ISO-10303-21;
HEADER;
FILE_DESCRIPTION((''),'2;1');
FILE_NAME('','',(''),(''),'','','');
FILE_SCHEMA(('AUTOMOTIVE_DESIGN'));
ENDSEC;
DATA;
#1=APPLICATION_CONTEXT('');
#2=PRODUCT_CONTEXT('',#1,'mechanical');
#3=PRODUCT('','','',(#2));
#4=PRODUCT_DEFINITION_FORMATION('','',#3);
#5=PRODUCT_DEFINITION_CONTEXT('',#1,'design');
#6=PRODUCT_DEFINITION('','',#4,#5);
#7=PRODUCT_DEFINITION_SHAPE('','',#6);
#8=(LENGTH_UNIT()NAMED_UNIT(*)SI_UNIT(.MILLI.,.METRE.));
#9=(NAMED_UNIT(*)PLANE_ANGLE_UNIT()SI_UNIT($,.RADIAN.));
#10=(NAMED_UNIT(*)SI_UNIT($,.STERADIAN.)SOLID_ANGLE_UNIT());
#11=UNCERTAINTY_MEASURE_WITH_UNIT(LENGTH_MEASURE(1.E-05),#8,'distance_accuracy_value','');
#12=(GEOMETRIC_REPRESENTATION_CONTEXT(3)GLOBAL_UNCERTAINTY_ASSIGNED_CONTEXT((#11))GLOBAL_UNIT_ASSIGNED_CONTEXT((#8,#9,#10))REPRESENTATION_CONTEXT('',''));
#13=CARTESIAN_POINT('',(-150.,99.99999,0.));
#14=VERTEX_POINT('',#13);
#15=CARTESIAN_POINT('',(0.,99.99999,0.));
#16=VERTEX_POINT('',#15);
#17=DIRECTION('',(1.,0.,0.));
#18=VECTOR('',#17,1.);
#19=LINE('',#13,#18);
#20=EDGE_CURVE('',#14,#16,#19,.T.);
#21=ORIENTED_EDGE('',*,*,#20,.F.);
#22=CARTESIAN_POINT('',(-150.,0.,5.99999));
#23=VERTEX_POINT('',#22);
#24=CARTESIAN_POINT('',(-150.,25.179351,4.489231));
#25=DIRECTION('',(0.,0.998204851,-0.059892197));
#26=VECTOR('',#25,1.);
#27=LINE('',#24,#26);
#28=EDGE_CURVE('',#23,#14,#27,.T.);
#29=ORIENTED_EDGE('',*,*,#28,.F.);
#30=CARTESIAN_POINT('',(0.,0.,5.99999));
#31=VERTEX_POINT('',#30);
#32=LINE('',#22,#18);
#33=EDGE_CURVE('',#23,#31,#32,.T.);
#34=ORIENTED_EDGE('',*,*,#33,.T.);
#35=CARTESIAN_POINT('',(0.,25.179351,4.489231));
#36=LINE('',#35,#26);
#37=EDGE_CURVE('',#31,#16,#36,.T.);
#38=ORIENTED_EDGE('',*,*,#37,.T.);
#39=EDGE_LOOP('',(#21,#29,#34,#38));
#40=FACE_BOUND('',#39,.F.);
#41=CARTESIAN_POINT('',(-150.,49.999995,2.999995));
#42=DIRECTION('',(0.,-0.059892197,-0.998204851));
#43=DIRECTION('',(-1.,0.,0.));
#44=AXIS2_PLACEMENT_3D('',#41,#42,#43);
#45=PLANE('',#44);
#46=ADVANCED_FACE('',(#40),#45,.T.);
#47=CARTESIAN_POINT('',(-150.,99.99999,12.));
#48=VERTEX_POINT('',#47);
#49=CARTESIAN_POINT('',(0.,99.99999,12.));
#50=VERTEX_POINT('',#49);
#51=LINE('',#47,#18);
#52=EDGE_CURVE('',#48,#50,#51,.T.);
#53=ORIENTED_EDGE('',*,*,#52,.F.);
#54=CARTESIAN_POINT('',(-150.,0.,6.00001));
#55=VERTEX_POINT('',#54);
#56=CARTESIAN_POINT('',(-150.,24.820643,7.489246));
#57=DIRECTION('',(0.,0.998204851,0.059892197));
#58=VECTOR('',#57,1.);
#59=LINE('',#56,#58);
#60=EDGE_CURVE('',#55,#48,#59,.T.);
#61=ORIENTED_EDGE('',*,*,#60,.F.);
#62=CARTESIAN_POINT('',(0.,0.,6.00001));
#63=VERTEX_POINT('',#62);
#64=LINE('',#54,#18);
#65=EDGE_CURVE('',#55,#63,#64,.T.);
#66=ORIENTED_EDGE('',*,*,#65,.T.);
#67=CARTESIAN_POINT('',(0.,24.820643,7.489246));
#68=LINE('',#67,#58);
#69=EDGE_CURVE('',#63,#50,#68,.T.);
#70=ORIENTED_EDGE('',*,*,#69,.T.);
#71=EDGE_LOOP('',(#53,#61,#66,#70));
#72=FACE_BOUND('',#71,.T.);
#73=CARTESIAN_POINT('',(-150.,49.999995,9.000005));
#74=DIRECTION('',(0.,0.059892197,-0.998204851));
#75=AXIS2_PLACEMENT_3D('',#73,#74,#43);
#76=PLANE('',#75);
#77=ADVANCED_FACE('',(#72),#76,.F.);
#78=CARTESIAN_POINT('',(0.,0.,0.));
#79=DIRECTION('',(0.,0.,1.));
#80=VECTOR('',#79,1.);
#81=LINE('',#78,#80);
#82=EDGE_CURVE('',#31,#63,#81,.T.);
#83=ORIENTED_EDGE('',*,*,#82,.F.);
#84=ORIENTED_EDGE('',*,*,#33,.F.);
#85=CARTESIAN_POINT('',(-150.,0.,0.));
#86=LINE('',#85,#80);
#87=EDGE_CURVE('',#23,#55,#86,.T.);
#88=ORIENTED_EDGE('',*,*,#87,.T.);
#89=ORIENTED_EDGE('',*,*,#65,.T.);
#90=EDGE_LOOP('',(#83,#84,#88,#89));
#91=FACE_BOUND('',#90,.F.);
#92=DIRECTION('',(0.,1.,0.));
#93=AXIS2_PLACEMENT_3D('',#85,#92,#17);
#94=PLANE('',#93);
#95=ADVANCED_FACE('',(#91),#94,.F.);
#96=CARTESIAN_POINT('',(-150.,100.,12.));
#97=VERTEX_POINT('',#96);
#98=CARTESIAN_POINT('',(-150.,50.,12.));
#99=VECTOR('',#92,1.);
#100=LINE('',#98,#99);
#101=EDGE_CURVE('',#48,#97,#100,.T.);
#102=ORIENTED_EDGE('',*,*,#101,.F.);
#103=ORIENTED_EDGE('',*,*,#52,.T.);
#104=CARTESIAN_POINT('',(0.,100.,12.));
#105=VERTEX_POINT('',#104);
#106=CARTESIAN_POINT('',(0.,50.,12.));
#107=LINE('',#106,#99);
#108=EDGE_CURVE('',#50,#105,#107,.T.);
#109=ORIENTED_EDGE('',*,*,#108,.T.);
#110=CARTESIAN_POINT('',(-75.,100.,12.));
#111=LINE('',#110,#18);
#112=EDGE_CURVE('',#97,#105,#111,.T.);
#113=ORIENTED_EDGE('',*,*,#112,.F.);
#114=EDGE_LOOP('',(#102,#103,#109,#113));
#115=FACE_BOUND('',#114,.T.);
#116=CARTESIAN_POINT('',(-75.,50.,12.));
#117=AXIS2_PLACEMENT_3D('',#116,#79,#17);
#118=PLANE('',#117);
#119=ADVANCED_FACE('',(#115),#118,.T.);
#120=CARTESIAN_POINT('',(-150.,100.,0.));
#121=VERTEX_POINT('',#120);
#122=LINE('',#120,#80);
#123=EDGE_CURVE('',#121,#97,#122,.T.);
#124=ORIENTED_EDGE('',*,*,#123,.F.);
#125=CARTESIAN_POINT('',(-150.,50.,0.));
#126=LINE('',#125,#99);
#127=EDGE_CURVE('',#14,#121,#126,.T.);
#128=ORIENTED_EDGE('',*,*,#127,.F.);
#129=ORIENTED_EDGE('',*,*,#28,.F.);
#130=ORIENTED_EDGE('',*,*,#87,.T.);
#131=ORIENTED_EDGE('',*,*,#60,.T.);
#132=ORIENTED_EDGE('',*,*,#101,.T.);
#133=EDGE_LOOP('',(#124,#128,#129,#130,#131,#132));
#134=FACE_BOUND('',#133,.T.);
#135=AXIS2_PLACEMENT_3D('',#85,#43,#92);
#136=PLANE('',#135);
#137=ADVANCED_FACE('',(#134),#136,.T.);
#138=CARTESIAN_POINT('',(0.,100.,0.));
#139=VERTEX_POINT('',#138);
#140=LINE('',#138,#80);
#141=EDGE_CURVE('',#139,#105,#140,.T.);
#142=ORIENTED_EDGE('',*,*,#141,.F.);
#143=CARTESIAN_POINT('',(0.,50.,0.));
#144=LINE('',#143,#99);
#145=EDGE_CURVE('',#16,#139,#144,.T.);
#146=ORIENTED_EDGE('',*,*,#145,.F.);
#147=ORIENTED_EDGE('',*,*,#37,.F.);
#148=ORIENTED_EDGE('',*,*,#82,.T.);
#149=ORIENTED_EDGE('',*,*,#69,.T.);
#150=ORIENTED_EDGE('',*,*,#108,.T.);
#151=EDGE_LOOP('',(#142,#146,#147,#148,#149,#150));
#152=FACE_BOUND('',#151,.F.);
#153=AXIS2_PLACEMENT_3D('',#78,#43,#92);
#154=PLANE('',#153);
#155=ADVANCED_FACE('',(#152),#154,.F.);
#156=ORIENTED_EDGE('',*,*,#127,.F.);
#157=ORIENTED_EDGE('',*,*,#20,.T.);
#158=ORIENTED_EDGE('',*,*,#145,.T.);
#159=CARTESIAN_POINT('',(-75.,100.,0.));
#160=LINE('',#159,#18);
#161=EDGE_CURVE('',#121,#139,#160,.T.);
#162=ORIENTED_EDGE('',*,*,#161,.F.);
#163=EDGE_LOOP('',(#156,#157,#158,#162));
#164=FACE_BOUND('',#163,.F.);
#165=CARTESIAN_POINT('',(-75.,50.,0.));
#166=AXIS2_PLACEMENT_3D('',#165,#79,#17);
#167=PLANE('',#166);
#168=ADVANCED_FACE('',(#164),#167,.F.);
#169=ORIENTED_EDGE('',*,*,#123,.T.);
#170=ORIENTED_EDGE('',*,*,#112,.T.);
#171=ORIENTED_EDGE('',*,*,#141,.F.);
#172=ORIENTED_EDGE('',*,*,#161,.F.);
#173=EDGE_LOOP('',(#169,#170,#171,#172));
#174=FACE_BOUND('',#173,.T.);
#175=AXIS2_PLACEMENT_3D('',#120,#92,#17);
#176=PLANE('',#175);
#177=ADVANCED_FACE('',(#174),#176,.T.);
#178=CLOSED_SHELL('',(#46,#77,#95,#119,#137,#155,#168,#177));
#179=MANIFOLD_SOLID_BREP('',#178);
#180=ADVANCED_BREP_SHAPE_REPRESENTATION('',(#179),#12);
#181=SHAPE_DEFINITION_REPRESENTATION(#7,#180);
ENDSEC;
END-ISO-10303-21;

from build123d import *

# Parameters (mm, degrees)
F0_W     = 150
F0_H     = 100
F1_DEPTH = 12
F2_SIZE2 = 99.99999
F2_SIZE  = 5.99999


# Not quite as in the source:
# - a fillet or chamfer is up to 0.001 mm smaller than in the source, because OpenCascade refuses the exact size


with BuildPart() as f1:
    # F0 (on Top) → F1 (new body)
    with BuildSketch(Plane.XY):
        with Locations((-75, 50)):
            Rectangle(F0_W, F0_H)
    extrude(amount=F1_DEPTH)

    # F2 (size 6 and 100 in the source; OpenCascade refuses exactly that, so slightly less here)
    f2_edges = [f1.edges().sort_by_distance(p)[0] for p in [
        (-75, 0, 12),
        (-75, 0, 0),
    ]]
    f2_side = f1.faces().sort_by_distance((-75, 0, 6))[0]
    chamfer(f2_edges, length=F2_SIZE, length2=F2_SIZE2, reference=f2_side)


solid = f1.part
